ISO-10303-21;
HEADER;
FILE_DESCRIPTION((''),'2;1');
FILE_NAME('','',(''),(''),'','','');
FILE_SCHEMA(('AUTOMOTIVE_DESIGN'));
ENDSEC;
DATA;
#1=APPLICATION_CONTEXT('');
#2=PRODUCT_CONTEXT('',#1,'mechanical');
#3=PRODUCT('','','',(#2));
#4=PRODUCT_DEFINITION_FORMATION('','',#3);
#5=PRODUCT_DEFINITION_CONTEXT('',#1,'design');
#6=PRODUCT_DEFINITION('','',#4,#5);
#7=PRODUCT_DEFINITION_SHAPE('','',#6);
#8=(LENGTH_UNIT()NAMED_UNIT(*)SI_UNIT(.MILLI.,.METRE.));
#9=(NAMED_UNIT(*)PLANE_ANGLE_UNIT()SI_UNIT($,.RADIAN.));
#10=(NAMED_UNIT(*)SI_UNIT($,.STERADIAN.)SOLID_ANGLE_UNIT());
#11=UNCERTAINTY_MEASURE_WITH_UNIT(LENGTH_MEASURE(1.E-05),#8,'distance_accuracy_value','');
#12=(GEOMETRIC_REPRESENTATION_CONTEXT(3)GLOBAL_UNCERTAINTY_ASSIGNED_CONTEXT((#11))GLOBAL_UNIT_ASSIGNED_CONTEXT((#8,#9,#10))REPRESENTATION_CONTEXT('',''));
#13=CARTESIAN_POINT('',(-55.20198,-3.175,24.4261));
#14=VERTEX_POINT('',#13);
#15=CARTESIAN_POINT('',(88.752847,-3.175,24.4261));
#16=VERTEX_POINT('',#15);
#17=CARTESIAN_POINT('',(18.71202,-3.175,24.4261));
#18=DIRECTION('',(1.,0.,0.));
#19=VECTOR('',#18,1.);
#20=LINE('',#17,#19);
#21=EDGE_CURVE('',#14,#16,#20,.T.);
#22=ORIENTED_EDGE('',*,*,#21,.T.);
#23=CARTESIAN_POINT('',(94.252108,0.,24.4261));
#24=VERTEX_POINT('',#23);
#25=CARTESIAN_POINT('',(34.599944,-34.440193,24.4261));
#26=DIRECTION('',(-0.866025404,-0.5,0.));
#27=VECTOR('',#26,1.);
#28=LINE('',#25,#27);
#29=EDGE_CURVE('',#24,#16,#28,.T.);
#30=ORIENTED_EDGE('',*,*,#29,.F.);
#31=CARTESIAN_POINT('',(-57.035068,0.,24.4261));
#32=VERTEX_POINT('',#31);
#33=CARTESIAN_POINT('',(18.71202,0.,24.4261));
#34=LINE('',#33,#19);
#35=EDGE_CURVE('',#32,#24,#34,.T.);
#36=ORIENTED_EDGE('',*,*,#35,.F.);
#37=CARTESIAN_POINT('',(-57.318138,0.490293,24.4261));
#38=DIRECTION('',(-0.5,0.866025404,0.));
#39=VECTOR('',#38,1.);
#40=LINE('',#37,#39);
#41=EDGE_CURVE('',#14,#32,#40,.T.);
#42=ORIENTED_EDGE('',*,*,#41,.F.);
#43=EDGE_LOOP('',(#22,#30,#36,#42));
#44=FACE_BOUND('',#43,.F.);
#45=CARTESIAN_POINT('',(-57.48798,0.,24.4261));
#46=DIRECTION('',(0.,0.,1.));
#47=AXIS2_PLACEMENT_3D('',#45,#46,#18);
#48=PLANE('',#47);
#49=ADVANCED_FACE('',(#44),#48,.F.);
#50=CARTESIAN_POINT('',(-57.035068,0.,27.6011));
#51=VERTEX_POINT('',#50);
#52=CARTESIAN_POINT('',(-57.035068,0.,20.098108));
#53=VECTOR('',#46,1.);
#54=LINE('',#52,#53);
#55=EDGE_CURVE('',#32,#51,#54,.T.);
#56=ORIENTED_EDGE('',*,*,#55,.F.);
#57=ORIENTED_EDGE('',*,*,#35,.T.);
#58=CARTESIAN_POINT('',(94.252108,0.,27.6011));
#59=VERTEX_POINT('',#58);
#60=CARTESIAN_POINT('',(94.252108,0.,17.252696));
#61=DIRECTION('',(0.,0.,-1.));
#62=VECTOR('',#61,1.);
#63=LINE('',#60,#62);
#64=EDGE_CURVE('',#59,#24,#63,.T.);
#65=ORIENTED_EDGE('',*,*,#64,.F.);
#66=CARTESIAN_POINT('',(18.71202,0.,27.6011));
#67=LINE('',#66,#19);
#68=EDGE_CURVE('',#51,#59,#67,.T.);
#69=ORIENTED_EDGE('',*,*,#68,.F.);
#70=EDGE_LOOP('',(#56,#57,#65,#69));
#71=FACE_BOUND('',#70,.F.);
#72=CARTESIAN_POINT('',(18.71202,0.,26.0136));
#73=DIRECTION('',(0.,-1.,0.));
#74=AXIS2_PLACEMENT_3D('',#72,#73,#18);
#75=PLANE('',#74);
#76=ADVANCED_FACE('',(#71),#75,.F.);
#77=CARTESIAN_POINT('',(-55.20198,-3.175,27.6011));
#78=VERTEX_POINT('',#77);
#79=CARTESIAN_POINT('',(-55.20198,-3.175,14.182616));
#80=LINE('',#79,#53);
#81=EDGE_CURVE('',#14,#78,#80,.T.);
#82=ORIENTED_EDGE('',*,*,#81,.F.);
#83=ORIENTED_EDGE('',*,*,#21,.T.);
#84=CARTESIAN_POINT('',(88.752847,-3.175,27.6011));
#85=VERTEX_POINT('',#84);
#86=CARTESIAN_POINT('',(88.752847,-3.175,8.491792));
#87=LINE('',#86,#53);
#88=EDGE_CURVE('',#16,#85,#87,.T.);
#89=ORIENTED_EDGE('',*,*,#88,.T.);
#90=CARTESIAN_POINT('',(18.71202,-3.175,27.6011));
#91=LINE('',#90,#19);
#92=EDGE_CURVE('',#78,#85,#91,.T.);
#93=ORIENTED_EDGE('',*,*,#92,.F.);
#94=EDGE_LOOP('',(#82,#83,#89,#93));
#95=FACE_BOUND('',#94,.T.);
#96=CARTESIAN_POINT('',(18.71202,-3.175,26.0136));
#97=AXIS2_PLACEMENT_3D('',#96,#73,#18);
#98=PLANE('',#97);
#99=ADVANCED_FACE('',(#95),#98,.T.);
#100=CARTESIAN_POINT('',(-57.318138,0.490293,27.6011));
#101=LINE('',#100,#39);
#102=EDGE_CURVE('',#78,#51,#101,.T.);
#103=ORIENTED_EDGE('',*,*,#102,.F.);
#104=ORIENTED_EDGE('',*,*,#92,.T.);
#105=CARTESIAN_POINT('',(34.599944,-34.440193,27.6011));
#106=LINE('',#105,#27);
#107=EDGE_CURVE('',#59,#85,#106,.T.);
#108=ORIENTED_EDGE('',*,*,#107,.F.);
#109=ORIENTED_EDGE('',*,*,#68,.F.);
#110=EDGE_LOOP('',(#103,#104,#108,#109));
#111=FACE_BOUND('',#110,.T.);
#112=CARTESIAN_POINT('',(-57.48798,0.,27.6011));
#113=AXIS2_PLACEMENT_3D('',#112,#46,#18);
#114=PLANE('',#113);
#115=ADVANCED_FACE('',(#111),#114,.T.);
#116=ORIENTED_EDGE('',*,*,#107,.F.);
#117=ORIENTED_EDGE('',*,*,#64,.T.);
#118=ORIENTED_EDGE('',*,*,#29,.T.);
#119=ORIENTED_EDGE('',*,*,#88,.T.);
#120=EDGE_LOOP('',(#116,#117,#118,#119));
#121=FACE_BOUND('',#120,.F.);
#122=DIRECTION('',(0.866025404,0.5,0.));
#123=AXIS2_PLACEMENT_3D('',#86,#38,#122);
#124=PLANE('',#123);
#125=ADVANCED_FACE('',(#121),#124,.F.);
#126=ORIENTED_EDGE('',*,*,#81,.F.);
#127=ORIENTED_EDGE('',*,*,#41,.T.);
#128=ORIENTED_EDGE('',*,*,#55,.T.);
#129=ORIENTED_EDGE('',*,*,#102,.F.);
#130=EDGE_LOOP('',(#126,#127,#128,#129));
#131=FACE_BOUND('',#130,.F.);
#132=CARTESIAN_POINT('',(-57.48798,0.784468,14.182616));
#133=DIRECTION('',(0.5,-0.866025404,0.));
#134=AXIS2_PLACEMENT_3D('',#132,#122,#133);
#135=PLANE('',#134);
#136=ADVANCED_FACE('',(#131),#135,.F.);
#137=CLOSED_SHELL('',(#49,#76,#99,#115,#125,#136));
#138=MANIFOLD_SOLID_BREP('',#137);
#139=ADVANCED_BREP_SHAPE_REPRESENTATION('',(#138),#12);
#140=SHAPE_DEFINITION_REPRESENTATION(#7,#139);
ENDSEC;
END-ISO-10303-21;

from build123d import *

# Parameters (mm, degrees)
F0_W        = 152.4
F0_H        = 3.175
F1_DEPTH    = 3.175
F2_T1_DEPTH = 23.6619672735
F3_T1_DEPTH = 35.0436157588


# Not quite as in the source:
# - a fillet or chamfer that OpenCascade refuses, or shapes differently, is made with other operations: its cross-section is extruded or revolved along the edge and cut away or added


with BuildPart() as f1:
    # F0 (on Front) → F1 (new body)
    with BuildSketch(Plane.XZ):
        with Locations((18.7120195478, 26.0135995823)):
            Rectangle(F0_W, F0_H)
    extrude(amount=F1_DEPTH)

    # F2: chamfer of 2.286 x 3.9594681461 on 1 edges, made by hand

    # F2_s2 → F2_t1 (cut)
    with BuildSketch(Plane.XY.offset(14.1826159455)):
        Polygon((-57.4879804522, 0.7844681461), (-55.2019804522, -3.175), (-57.4879804522, -3.175), align=None)
    extrude(amount=F2_T1_DEPTH, mode=Mode.SUBTRACT)

    # F3: chamfer of 3.556 x 6.1591726717 on 1 edges, made by hand

    # F3_s2 → F3_t1 (cut)
    with BuildSketch(Plane.XY.offset(8.4917917029)):
        Polygon((88.7528468761, -3.175), (94.9120195478, 0.381), (94.9120195478, -3.175), align=None)
    extrude(amount=F3_T1_DEPTH, mode=Mode.SUBTRACT)


solid = f1.part
